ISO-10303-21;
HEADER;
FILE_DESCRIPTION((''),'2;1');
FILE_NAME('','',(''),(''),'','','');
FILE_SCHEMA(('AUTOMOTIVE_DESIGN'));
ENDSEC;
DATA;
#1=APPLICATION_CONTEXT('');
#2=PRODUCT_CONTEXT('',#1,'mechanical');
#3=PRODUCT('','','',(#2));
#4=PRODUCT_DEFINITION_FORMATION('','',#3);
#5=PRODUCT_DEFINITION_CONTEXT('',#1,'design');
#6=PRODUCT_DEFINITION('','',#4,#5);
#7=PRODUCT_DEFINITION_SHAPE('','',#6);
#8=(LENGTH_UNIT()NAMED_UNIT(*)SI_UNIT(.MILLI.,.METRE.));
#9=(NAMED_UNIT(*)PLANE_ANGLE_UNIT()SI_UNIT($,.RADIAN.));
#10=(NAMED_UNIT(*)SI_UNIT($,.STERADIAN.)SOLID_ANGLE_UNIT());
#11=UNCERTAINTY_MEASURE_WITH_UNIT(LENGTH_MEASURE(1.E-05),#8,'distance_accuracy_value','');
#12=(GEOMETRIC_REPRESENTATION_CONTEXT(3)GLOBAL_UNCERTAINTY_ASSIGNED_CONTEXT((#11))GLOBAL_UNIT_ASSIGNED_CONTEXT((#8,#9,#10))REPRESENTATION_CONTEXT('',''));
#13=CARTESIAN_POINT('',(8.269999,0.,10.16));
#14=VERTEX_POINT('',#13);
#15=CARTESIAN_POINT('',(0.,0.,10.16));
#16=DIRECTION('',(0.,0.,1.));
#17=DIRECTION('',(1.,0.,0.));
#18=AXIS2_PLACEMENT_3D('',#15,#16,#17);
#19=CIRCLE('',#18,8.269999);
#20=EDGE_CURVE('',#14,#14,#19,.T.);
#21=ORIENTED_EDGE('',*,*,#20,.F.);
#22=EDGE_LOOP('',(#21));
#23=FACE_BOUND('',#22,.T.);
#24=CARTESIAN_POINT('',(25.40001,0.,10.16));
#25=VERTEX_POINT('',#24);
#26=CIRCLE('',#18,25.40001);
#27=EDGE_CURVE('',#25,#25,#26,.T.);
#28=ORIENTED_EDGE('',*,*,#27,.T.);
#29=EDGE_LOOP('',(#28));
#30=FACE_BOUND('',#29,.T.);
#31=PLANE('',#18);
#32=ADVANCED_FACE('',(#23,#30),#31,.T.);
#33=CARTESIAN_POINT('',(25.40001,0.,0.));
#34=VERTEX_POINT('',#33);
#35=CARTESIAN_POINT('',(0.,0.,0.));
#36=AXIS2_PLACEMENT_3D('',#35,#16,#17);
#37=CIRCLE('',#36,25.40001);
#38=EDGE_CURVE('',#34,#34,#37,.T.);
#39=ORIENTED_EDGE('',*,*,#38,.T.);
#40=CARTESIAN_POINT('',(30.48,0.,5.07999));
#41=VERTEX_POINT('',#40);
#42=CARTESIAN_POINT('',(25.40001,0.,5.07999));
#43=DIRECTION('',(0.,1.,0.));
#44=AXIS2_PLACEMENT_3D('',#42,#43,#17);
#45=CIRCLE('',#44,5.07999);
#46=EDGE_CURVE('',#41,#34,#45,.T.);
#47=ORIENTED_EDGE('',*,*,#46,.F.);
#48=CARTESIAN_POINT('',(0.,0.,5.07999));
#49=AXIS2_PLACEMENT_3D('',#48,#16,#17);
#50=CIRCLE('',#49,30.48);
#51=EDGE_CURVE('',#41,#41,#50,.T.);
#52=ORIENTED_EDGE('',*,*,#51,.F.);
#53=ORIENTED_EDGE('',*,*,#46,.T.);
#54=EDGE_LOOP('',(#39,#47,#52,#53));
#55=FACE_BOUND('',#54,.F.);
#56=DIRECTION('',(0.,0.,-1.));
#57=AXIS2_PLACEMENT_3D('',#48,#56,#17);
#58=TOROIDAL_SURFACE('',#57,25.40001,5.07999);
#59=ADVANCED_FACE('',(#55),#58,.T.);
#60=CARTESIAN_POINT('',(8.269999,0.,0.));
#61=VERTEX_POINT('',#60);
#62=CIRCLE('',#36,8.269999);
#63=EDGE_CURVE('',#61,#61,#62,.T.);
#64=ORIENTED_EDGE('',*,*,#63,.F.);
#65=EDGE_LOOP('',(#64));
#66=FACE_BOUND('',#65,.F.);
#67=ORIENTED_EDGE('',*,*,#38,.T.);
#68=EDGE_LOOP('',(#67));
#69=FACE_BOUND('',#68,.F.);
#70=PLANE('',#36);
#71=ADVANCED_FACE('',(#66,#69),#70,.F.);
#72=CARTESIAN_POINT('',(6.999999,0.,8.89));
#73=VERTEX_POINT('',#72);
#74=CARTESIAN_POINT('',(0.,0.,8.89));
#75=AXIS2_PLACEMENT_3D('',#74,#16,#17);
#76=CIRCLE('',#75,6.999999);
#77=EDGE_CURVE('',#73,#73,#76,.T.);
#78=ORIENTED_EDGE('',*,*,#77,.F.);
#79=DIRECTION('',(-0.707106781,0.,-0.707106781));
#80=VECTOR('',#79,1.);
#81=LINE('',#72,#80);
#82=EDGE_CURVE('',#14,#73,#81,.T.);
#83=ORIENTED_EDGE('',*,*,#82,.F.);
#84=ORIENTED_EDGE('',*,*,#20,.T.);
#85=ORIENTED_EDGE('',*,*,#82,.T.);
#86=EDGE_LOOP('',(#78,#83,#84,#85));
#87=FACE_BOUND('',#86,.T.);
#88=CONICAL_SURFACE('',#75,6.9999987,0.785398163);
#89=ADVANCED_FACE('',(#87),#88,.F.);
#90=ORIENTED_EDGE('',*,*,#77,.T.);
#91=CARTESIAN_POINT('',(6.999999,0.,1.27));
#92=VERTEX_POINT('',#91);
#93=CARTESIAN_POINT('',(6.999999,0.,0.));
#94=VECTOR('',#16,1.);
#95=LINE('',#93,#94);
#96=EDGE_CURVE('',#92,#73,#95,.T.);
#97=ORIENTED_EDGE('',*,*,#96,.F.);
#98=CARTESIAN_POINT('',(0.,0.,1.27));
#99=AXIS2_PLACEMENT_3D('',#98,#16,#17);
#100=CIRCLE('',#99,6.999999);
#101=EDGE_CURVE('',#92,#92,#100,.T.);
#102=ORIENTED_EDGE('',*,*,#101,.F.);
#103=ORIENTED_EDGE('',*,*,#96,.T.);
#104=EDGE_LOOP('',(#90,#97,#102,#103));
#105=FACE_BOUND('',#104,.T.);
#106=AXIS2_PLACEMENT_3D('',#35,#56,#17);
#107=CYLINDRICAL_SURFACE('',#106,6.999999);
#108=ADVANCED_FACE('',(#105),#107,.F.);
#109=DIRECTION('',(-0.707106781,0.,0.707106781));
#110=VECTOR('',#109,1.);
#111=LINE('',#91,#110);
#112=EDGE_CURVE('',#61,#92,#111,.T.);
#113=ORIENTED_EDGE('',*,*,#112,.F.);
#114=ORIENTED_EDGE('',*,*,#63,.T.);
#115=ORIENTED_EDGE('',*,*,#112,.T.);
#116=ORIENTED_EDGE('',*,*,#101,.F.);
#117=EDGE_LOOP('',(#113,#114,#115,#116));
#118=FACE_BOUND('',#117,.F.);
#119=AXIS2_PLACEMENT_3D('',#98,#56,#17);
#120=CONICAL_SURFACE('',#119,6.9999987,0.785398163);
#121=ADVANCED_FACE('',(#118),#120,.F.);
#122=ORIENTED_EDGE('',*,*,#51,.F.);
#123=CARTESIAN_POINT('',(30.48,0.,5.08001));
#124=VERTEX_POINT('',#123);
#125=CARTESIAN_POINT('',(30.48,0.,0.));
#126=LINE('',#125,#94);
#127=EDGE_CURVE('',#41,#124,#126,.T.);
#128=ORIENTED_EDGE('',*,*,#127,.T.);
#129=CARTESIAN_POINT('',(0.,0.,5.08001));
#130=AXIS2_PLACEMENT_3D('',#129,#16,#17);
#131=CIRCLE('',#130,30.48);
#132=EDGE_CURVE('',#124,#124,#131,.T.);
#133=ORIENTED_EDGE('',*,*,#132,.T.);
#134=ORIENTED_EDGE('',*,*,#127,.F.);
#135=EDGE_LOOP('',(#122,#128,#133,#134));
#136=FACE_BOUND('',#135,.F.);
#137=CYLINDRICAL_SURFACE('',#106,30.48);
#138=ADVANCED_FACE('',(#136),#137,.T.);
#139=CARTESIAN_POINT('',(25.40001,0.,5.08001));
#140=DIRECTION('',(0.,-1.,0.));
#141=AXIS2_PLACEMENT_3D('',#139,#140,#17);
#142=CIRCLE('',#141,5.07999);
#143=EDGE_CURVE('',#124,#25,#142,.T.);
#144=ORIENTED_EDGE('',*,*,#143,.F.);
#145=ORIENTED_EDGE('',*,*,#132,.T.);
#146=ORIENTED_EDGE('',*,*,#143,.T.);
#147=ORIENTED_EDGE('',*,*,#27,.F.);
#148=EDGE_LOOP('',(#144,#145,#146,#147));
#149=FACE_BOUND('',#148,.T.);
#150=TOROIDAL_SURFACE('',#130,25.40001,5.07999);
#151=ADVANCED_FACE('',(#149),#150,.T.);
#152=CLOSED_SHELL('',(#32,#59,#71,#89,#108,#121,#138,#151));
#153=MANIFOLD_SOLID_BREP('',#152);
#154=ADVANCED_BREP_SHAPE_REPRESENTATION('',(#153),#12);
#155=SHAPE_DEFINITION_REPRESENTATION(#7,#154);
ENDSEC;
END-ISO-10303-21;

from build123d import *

# Parameters (mm, degrees)
F0_R     = 30.48
F0_R_2   = 6.9999987
F1_DEPTH = 10.16
F2_R     = 5.07999
F3_SIZE  = 1.27


# Not quite as in the source:
# - a fillet or chamfer is up to 0.001 mm smaller than in the source, because OpenCascade refuses the exact size


with BuildPart() as f1:
    # F0 (on Top) → F1 (new body)
    with BuildSketch(Plane.XY):
        Circle(F0_R)
        Circle(F0_R_2, mode=Mode.SUBTRACT)
    extrude(amount=F1_DEPTH)

    # F2 (radius 5.08 in the source; OpenCascade refuses exactly that, so slightly less here)
    f2_edges = [f1.edges().sort_by_distance(p)[0] for p in [
        (-30.48, 0, 10.16),
        (-30.48, 0, 0),
    ]]
    fillet(f2_edges, radius=F2_R)

    # F3
    f3_edges = [f1.edges().sort_by_distance(p)[0] for p in [
        (-6.999999, 0, 10.16),
        (-6.999999, 0, 0),
    ]]
    chamfer(f3_edges, length=F3_SIZE)


solid = f1.part
